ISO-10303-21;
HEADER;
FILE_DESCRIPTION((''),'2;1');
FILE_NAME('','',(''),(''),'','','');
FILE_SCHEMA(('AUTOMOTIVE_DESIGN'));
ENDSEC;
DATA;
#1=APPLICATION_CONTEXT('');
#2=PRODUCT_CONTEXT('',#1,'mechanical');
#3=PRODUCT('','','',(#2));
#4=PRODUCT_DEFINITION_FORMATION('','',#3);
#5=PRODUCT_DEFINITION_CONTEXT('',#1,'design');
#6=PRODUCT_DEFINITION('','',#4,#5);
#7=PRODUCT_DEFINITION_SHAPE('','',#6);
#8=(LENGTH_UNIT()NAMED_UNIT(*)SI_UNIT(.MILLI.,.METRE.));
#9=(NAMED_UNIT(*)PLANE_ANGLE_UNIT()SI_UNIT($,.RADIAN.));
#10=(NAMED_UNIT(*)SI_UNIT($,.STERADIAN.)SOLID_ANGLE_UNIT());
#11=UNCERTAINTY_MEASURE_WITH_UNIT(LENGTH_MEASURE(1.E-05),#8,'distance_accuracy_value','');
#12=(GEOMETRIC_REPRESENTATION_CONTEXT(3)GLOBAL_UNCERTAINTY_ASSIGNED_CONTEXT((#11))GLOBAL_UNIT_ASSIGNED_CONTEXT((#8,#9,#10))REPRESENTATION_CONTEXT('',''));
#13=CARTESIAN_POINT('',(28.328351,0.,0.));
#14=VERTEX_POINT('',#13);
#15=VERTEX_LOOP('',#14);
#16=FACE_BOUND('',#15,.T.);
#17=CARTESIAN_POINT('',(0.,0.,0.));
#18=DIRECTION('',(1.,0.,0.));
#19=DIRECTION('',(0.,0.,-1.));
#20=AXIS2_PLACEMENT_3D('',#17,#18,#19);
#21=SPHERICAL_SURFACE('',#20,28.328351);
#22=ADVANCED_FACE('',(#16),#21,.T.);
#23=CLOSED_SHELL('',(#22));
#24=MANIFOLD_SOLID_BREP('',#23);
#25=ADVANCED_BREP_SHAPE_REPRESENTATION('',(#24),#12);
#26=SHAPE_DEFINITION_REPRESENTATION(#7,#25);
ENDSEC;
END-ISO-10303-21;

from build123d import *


# Not quite as in the source:
# - the program builds the solid bodies; features that only make, move or delete a surface that nothing else refers to are left out


with BuildPart() as f1:
    # F0 (on Front) → F1 (revolve)
    with BuildSketch(Plane.XZ):
        with BuildLine():
            ThreePointArc((-28.3283509522, 0), (0, -28.3283509522), (28.3283509522, 0))
            Line((28.3283509522, 0), (-28.3283509522, 0))
        make_face()
    revolve(axis=Axis((0, 0, 0), (1, 0, 0)))


solid = f1.part
